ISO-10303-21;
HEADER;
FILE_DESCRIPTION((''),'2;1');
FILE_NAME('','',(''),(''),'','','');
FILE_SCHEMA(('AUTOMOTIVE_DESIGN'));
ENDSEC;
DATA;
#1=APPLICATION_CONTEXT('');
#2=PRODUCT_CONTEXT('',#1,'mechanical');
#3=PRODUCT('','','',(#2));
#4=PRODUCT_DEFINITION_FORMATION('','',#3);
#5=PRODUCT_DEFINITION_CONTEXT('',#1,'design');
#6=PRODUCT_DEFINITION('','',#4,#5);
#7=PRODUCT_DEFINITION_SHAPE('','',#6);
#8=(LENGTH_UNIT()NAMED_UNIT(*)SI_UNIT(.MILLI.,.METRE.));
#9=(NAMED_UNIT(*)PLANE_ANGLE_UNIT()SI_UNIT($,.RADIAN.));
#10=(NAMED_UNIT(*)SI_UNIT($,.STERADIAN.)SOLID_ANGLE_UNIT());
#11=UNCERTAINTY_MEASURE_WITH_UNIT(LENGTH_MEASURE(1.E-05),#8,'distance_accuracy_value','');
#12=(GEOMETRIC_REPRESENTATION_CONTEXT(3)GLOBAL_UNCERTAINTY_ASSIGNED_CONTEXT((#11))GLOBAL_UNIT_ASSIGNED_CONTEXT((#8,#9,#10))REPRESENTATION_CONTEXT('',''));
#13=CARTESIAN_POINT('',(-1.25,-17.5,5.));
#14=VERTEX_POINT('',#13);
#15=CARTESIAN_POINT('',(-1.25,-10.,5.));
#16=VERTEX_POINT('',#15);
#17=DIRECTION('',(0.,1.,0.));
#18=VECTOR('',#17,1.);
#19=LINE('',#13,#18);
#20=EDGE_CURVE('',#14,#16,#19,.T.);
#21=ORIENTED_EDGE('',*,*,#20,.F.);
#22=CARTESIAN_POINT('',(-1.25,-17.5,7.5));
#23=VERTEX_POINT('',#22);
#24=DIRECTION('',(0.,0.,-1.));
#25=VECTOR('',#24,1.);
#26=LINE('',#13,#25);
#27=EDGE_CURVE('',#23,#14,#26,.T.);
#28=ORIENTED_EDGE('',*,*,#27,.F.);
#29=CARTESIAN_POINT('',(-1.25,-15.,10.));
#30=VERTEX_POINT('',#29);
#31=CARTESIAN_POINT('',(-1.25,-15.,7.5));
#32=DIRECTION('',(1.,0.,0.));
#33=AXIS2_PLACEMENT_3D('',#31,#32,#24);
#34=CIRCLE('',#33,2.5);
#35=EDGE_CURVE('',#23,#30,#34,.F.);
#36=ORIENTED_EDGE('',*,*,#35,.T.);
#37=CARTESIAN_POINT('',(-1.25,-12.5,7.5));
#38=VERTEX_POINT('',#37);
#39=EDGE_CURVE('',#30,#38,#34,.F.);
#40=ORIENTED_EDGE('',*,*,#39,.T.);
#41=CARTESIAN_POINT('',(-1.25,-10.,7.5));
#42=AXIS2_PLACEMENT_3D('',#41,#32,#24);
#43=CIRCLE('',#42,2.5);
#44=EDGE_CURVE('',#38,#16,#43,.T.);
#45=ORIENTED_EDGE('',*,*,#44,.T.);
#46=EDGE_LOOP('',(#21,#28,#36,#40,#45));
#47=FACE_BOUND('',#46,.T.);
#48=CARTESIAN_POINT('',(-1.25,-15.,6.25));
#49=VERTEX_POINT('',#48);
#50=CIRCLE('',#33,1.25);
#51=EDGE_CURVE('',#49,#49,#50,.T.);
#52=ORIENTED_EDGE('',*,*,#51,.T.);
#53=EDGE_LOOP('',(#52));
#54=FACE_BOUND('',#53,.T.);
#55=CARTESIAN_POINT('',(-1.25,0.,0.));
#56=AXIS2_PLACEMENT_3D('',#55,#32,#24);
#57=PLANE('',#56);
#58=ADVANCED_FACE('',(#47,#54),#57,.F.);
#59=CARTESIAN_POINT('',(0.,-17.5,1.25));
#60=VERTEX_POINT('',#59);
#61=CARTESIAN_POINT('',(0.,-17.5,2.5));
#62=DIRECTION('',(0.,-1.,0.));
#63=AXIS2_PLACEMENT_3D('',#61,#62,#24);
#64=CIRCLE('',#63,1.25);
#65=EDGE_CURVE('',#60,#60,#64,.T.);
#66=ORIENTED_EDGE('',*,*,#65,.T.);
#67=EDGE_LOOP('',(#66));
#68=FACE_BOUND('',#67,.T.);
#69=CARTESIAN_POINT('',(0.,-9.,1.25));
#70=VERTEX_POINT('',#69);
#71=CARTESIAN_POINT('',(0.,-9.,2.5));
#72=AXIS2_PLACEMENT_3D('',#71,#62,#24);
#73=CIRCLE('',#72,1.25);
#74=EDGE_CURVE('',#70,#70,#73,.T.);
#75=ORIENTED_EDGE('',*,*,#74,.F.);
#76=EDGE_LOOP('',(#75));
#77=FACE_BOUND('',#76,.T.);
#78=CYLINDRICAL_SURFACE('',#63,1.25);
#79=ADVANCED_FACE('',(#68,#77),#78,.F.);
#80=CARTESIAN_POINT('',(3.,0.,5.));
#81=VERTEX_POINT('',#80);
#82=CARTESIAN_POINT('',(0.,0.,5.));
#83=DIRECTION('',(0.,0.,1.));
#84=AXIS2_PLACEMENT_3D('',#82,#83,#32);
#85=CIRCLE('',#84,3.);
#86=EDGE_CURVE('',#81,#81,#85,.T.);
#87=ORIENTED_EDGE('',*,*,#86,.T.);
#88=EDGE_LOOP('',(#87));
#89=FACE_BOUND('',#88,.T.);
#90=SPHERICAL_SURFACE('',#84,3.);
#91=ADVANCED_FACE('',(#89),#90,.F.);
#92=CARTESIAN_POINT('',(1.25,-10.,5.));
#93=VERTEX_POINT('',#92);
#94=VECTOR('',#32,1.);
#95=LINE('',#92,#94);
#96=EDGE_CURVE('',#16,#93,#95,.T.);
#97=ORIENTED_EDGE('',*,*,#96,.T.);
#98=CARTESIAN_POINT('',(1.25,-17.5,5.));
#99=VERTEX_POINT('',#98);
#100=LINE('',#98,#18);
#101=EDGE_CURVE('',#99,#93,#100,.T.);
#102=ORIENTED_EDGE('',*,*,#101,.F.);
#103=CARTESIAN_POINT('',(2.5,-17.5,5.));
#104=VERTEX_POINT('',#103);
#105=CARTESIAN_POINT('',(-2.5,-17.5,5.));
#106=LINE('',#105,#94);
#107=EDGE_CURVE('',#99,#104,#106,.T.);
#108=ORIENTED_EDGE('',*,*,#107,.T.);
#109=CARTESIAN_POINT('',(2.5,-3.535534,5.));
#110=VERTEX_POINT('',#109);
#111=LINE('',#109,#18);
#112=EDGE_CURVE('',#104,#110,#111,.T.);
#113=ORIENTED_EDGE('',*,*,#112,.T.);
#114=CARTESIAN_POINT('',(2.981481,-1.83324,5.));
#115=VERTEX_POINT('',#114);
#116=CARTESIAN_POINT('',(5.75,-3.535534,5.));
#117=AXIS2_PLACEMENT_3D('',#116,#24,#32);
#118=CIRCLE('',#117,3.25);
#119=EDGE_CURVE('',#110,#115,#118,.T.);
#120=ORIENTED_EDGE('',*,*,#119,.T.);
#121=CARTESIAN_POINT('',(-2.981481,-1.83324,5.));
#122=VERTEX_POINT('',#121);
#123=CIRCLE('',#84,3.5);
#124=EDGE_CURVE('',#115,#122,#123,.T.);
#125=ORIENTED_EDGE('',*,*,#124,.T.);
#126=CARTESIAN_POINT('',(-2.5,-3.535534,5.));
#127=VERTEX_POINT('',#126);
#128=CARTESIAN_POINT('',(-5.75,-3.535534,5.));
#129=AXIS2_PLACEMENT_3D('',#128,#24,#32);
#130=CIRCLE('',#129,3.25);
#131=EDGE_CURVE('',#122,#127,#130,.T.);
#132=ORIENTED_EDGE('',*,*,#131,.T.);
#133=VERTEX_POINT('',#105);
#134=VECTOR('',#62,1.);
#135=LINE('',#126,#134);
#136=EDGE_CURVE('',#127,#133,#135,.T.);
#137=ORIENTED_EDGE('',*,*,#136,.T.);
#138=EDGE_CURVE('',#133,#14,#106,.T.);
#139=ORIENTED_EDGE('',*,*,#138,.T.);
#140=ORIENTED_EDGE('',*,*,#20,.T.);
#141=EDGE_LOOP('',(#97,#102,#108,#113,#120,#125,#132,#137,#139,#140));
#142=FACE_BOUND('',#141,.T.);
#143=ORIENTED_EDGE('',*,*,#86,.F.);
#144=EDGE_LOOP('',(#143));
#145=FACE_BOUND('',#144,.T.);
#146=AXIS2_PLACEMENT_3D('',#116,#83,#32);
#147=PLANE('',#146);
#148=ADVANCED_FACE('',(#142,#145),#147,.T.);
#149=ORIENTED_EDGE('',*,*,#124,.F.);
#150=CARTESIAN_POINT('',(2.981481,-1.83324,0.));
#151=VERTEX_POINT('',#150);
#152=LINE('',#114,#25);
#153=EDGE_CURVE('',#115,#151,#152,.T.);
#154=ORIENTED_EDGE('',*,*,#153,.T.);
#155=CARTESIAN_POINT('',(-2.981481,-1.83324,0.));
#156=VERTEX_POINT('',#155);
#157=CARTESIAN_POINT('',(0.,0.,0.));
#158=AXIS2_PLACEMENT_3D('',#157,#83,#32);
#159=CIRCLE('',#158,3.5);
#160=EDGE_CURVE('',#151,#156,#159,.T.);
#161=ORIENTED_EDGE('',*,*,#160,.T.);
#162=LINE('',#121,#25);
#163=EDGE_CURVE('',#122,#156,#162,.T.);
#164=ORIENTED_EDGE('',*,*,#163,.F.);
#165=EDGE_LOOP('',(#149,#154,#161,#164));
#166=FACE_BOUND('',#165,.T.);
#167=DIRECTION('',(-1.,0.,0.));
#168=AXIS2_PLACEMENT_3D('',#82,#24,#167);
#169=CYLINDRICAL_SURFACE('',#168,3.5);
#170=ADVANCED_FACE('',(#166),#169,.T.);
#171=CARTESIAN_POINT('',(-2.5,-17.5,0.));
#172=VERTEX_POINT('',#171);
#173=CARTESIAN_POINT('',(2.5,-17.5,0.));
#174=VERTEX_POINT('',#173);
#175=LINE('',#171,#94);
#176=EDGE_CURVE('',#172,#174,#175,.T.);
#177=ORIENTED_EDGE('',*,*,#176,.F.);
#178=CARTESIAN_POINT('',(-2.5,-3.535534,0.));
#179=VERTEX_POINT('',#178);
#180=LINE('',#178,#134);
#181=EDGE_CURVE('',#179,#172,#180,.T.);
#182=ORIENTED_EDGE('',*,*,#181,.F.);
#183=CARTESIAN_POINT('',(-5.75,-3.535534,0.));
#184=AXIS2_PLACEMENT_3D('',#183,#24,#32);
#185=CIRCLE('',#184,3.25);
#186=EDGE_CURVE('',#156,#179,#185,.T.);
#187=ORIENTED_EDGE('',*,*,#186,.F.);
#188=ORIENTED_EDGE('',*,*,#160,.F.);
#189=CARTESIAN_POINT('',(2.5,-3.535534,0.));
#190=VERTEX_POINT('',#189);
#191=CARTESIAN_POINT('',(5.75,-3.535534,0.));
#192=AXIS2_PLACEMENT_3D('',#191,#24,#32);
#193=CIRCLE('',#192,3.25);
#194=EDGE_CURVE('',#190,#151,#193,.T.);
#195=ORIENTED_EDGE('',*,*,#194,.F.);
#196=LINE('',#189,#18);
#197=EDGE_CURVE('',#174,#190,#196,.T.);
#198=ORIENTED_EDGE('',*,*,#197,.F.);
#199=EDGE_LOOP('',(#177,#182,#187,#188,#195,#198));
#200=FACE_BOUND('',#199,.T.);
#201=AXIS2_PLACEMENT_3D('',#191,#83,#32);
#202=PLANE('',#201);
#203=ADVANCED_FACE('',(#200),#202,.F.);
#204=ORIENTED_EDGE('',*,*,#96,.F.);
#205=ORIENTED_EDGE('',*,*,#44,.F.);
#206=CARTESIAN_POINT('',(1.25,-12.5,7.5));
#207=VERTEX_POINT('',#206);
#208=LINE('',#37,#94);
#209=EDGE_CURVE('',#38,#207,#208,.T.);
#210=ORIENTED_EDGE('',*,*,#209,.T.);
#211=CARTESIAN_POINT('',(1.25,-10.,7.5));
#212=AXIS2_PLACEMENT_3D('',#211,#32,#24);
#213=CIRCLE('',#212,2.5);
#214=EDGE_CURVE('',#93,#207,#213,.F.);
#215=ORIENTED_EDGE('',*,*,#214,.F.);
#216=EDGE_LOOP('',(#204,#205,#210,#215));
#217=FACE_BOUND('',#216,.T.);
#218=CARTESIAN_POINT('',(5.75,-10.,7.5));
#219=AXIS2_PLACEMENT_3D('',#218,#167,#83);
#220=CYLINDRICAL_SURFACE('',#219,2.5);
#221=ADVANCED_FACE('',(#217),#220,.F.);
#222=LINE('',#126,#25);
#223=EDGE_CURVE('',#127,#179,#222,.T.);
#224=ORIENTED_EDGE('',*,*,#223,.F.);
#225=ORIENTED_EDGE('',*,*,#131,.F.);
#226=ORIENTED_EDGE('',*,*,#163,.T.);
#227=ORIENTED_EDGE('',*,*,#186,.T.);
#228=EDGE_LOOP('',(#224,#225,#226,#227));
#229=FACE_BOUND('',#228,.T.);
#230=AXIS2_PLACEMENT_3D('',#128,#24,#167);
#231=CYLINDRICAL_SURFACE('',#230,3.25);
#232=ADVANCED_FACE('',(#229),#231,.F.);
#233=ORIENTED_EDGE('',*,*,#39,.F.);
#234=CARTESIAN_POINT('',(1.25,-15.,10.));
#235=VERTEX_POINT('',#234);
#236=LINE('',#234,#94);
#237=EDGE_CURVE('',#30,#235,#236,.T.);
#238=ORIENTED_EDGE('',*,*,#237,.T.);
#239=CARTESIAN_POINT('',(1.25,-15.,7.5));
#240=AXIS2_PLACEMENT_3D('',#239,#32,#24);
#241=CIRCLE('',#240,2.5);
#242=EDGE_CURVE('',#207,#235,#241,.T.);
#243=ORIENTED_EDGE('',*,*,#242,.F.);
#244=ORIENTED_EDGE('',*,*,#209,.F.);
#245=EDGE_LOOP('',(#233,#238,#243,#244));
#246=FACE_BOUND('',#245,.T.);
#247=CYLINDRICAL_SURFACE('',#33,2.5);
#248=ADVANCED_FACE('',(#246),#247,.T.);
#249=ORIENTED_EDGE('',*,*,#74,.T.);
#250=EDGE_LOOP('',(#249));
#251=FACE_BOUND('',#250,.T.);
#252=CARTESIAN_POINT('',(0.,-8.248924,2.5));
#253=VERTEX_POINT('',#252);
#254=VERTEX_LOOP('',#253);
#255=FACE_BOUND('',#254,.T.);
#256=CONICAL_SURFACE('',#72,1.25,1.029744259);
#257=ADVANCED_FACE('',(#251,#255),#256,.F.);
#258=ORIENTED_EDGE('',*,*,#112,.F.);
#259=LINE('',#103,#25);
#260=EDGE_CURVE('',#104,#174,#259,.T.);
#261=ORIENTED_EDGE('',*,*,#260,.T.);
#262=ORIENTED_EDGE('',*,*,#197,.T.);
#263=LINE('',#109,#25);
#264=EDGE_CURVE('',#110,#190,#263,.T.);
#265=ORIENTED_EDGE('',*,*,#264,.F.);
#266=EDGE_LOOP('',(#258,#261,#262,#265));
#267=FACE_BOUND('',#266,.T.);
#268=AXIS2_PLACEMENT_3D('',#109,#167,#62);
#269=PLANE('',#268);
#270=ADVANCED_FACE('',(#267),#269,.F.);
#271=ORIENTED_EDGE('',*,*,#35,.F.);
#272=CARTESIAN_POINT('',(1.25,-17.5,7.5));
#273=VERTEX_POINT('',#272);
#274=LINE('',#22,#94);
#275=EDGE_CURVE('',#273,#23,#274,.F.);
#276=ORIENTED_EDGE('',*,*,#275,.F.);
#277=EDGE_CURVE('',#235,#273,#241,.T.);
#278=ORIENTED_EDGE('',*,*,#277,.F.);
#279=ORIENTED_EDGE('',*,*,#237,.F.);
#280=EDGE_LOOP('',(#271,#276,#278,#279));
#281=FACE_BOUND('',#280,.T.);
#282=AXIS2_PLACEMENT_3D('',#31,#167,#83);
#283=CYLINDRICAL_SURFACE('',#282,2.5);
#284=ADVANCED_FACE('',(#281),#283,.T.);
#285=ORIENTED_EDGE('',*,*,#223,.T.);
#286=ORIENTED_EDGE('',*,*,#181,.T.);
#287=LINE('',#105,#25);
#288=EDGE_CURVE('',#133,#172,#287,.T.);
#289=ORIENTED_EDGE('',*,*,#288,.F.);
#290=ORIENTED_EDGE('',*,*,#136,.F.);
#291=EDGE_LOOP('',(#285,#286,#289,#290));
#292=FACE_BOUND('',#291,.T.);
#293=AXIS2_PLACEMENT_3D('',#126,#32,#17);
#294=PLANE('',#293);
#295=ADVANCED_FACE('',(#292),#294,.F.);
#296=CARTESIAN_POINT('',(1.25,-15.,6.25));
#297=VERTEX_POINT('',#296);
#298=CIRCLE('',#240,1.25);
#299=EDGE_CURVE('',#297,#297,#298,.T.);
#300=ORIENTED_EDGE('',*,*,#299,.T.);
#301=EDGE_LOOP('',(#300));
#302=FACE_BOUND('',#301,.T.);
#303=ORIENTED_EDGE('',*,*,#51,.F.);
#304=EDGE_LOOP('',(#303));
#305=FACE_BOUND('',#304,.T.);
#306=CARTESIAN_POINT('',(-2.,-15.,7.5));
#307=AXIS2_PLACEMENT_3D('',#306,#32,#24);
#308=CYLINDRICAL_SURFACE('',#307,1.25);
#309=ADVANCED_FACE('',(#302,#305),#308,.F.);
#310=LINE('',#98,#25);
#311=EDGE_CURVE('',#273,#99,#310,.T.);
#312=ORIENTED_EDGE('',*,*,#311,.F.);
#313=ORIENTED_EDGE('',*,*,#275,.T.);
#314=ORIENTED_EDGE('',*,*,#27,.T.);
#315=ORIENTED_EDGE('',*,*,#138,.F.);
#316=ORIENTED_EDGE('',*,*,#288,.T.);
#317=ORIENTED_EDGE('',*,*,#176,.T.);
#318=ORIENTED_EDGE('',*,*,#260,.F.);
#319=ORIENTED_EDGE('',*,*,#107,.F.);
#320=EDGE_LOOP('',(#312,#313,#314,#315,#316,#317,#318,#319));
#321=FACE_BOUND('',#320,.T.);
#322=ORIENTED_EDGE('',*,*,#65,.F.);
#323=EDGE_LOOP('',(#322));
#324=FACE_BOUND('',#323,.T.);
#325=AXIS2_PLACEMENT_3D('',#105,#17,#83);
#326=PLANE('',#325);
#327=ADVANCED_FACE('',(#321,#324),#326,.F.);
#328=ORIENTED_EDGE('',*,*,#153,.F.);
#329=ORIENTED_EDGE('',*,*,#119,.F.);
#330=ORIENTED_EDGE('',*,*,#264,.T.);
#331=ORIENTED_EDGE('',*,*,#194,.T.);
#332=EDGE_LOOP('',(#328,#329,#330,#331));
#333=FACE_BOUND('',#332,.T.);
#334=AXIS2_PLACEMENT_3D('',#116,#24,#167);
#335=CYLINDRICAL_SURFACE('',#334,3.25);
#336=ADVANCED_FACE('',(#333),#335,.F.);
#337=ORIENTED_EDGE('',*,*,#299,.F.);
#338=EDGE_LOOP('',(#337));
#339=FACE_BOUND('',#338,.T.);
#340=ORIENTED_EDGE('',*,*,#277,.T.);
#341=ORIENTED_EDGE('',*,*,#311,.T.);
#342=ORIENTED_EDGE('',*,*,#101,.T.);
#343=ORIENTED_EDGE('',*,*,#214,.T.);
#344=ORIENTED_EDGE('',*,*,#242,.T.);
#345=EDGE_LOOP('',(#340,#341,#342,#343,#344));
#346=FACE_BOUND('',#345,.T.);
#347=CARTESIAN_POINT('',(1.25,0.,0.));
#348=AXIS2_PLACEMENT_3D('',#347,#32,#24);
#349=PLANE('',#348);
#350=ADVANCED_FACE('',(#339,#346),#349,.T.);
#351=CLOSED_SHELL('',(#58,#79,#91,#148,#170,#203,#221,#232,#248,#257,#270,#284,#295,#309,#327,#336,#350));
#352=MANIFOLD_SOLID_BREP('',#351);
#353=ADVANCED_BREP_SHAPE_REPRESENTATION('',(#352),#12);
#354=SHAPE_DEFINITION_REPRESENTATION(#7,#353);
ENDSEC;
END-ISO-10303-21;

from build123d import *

# Parameters (mm, degrees)
AUFSATZ_LINEAR_AUSTRAGEN1_DEPTH      = 5
AUFSATZ_LINEAR_AUSTRAGEN2_DEPTH      = 1.25
AUFSATZ_LINEAR_AUSTRAGEN2_DEPTH_BACK = 1.25
SKIZZE2_W                            = 5
SKIZZE2_H                            = 5
SKIZZE3_R                            = 1.25
SCHNITT_LINEAR_AUSTRAGEN1_DEPTH      = 3.25
M3_GEWINDEBOHRUNG1_D                 = 2.5
M3_GEWINDEBOHRUNG1_DEPTH             = 8.5
M3_GEWINDEBOHRUNG1_TIP               = 0.751075774
VERRUNDUNG1_R                        = 2.5


with BuildPart() as part:
    # Skizze1 → Aufsatz-Linear austragen1 (new body)
    with BuildSketch(Plane.XY):
        with BuildLine():
            Line((-2.5, -3.535533906), (-2.5, -17.5))
            Line((-2.5, -17.5), (2.5, -17.5))
            Line((2.5, -17.5), (2.5, -3.535533906))
            ThreePointArc((2.5, -3.535533906), (2.622686042, -2.650995943), (2.981481481, -1.833239803))
            ThreePointArc((2.981481481, -1.833239803), (0, 3.5), (-2.981481481, -1.833239803))
            ThreePointArc((-2.981481481, -1.833239803), (-2.622686042, -2.650995943), (-2.5, -3.535533906))
        make_face()
    extrude(amount=AUFSATZ_LINEAR_AUSTRAGEN1_DEPTH)

    # Skizze2 → Aufsatz-Linear austragen2 (add, two sides: drawn at the far end of the back side and taken through both)
    with BuildSketch(Plane(origin=(0, 0, 0), x_dir=(0, 0, -1), z_dir=(1, 0, 0)).offset(-AUFSATZ_LINEAR_AUSTRAGEN2_DEPTH_BACK)):
        with Locations((-7.5, -15)):
            Rectangle(SKIZZE2_W, SKIZZE2_H)
    extrude(amount=AUFSATZ_LINEAR_AUSTRAGEN2_DEPTH + AUFSATZ_LINEAR_AUSTRAGEN2_DEPTH_BACK)

    # Skizze3 → Schnitt-Linear austragen1 (cut)
    with BuildSketch(Plane(origin=(1.25, 0, 0), x_dir=(0, 0, -1), z_dir=(1, 0, 0))):
        with Locations((-7.5, -15)):
            Circle(SKIZZE3_R)
    extrude(amount=-SCHNITT_LINEAR_AUSTRAGEN1_DEPTH, mode=Mode.SUBTRACT)

    # Skizze4 → Schnitt-Rotation1 (revolve, cut)
    with BuildSketch(Plane(origin=(0, 0, 0), x_dir=(1, 0, 0), z_dir=(0, 1, 0))):
        with BuildLine():
            Line((3, -5), (-3, -5))
            ThreePointArc((-3, -5), (0, -2), (3, -5))
        make_face()
    revolve(axis=Axis((7.725672482, 0, 5), (-1, 0, 0)), mode=Mode.SUBTRACT)

    # M3 Gewindebohrung1
    with Locations(Plane(origin=(0, -17.5, 2.5), x_dir=(0, 0, -1), z_dir=(0, -1, 0))):
        with Locations((0, 0)):
            Hole(M3_GEWINDEBOHRUNG1_D / 2, depth=M3_GEWINDEBOHRUNG1_DEPTH)
            with Locations((0, 0, -(M3_GEWINDEBOHRUNG1_DEPTH + M3_GEWINDEBOHRUNG1_TIP / 2))):  # 118° drill point
                Cone(0, M3_GEWINDEBOHRUNG1_D / 2, M3_GEWINDEBOHRUNG1_TIP, mode=Mode.SUBTRACT)

    # Verrundung1
    verrundung1_edges = [part.edges().sort_by_distance(p)[0] for p in [
        (0, -12.5, 5),
        (0, -12.5, 10),
        (0, -17.5, 10),
    ]]
    fillet(verrundung1_edges, radius=VERRUNDUNG1_R - 0.0001)  # a hair under: the kernel refuses the full size


solid = part.part
